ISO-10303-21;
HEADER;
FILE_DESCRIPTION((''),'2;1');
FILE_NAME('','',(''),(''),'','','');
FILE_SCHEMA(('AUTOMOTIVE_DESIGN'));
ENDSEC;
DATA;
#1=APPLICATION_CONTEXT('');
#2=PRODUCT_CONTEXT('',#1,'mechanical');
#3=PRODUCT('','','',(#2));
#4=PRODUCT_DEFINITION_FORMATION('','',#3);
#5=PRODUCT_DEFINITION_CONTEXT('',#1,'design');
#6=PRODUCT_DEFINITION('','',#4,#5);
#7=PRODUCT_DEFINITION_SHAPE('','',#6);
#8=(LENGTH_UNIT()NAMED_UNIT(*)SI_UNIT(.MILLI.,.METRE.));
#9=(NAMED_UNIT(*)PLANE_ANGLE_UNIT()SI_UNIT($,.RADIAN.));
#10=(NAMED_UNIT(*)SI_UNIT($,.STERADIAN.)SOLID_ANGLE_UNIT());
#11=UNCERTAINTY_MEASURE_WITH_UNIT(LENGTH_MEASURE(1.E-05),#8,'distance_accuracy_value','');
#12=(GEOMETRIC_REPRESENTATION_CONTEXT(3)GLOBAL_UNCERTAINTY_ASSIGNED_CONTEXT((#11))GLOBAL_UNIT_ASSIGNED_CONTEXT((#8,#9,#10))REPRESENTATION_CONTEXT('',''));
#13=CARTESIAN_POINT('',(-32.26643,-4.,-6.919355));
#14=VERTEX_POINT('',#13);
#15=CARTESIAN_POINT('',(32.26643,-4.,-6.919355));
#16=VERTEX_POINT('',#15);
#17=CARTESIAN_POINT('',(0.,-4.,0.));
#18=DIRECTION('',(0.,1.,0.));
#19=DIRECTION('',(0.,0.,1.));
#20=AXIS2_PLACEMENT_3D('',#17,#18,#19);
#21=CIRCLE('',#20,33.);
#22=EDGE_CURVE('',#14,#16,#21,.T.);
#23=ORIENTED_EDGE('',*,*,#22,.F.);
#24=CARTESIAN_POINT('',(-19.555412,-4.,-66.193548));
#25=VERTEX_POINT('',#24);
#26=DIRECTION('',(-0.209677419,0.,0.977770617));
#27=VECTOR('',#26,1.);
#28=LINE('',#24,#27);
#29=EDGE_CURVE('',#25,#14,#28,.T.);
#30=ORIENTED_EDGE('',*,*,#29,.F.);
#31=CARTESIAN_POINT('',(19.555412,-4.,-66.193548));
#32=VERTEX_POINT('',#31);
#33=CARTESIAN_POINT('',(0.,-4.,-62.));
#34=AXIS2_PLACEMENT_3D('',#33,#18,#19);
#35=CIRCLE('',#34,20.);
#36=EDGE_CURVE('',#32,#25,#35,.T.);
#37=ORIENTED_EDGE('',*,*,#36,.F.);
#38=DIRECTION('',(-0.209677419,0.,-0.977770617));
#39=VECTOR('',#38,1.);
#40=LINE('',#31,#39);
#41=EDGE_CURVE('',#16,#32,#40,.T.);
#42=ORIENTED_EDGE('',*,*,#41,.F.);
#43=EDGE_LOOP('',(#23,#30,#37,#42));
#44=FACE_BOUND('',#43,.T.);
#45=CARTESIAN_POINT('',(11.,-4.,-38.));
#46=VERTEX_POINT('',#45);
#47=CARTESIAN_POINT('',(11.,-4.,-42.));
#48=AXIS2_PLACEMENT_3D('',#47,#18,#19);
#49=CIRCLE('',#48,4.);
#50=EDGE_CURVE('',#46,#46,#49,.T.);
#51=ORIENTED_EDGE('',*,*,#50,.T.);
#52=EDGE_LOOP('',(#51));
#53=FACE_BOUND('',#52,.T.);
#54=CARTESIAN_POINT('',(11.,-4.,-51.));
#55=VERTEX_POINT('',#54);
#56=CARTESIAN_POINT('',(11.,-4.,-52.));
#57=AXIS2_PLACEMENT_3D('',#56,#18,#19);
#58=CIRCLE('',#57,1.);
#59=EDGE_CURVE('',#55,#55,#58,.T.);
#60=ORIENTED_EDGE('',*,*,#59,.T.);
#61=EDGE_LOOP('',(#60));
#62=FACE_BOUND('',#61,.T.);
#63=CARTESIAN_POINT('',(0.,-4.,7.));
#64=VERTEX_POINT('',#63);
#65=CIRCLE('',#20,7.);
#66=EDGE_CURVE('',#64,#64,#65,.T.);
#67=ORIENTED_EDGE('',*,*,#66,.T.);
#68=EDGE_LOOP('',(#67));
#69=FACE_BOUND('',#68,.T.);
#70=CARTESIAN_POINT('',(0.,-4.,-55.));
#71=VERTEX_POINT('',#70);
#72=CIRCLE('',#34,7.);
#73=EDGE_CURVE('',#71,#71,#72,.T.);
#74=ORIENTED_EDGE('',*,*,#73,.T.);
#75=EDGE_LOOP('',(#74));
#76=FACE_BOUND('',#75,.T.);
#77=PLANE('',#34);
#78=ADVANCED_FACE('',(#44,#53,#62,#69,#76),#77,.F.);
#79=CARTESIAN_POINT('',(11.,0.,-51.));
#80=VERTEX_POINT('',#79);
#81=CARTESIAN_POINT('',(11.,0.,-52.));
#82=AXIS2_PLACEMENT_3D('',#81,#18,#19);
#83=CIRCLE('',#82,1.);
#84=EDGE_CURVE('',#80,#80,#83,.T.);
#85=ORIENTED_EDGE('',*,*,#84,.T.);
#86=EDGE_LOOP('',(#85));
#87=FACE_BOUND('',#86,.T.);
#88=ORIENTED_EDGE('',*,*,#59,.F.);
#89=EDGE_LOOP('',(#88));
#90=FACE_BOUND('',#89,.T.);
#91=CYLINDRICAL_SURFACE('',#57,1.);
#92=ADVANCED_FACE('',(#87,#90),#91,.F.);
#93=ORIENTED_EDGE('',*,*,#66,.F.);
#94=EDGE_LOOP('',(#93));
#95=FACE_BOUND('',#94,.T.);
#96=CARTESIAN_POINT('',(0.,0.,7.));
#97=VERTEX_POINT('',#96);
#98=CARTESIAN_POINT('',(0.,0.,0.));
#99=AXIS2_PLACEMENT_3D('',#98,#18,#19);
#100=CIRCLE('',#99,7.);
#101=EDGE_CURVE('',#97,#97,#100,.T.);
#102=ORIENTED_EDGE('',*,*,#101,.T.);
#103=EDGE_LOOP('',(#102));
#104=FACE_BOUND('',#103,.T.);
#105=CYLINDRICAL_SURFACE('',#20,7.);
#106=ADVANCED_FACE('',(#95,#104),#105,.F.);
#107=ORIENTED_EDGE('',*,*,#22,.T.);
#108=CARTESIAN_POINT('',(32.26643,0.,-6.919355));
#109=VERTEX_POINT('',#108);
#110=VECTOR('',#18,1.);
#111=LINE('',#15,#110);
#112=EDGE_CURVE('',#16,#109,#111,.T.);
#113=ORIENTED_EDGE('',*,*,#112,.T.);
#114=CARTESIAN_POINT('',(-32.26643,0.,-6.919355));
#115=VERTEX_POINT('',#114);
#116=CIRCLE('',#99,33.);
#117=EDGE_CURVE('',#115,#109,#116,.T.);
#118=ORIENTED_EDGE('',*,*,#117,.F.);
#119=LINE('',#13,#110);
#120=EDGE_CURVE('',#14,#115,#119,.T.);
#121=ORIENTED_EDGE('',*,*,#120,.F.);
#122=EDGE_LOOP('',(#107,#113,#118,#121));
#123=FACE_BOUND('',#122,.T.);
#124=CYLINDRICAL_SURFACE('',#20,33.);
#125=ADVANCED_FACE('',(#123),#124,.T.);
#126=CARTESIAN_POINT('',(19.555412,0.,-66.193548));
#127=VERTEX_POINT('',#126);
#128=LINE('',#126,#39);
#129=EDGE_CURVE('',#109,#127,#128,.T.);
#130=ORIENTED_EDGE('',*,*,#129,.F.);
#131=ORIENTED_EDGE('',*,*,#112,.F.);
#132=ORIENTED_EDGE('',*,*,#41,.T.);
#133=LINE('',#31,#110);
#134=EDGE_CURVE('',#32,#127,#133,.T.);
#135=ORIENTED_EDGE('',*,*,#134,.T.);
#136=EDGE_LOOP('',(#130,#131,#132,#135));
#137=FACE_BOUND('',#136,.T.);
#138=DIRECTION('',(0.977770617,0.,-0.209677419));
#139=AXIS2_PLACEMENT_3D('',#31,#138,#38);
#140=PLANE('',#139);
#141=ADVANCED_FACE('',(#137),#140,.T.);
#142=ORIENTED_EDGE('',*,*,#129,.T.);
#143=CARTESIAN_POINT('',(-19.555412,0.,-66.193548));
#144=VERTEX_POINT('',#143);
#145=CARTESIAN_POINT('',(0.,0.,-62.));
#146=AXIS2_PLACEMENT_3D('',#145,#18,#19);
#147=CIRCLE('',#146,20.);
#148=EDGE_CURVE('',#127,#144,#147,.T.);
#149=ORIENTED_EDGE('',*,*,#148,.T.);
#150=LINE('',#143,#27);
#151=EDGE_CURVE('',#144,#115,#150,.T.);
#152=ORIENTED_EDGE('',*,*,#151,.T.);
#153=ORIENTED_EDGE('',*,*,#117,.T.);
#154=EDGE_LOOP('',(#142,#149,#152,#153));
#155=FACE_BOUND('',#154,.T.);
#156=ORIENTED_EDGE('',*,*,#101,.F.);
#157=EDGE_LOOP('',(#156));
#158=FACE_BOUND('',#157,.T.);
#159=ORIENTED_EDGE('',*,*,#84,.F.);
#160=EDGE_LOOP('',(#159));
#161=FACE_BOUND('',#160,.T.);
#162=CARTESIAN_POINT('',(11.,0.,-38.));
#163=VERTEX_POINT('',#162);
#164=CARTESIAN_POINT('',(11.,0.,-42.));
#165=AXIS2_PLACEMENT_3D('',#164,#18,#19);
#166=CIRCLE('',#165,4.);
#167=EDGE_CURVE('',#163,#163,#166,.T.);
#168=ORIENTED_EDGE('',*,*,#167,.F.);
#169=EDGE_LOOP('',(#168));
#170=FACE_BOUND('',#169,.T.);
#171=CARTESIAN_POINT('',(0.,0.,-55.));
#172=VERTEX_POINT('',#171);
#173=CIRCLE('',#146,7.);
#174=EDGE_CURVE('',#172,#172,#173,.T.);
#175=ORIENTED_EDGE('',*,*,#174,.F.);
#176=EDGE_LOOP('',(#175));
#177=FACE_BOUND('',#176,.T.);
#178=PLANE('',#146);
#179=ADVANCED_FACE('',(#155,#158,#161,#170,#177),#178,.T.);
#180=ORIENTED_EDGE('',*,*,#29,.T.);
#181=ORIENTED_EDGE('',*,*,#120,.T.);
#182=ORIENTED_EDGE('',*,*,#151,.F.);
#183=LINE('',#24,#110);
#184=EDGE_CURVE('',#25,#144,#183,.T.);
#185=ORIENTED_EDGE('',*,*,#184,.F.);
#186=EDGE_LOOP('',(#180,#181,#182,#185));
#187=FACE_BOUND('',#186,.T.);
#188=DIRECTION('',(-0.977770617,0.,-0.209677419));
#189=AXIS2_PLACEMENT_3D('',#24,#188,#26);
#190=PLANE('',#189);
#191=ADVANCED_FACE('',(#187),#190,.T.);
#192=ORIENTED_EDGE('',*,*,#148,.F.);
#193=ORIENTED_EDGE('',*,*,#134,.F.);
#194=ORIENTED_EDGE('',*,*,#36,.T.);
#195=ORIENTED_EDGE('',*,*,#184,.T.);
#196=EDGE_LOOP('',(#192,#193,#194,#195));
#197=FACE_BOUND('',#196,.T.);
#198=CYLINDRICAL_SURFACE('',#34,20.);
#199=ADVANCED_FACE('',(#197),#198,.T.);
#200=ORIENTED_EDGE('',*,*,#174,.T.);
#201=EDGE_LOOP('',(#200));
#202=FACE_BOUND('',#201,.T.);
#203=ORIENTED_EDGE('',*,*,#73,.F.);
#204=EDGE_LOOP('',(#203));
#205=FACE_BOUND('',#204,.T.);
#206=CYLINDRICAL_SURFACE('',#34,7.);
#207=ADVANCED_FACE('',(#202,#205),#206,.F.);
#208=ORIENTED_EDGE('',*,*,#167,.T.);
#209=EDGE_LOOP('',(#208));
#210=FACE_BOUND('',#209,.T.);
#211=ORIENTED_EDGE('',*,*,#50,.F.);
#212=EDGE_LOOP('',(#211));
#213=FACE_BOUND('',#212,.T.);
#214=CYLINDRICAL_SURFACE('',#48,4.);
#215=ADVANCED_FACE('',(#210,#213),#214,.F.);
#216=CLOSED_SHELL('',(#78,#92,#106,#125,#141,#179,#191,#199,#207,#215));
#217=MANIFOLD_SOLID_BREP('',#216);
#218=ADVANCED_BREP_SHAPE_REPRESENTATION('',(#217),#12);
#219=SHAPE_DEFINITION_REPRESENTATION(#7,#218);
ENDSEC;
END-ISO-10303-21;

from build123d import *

# Parameters (mm, degrees)
SCHIZZO1_R          = 7
SCHIZZO1_R_2        = 1
SCHIZZO1_R_3        = 4
BASE_FLANGIA1_DEPTH = 4


# Sheet-metal steps are written as plain solids
with BuildPart() as part:
    # Schizzo1 → Base-Flangia1 (new body)
    with BuildSketch(Plane(origin=(0, 0, 0), x_dir=(1, 0, 0), z_dir=(0, 1, 0))):
        with BuildLine():
            Line((-19.555412344, 66.193548387), (-32.266430367, 6.919354839))
            ThreePointArc((-32.266430367, 6.919354839), (0, -33), (32.266430367, 6.919354839))
            Line((32.266430367, 6.919354839), (19.555412344, 66.193548387))
            ThreePointArc((19.555412344, 66.193548387), (0, 82), (-19.555412344, 66.193548387))
        make_face()
        with Locations(Location((0, 62, 0), (0, 0, 270))):
            Circle(SCHIZZO1_R, mode=Mode.SUBTRACT)
        with Locations(Location((0, 0, 0), (0, 0, 270))):
            Circle(SCHIZZO1_R, mode=Mode.SUBTRACT)
        with Locations(Location((11, 52, 0), (0, 0, 270))):
            Circle(SCHIZZO1_R_2, mode=Mode.SUBTRACT)
        with Locations(Location((11, 42, 0), (0, 0, 270))):
            Circle(SCHIZZO1_R_3, mode=Mode.SUBTRACT)
    extrude(amount=-BASE_FLANGIA1_DEPTH)


solid = part.part
